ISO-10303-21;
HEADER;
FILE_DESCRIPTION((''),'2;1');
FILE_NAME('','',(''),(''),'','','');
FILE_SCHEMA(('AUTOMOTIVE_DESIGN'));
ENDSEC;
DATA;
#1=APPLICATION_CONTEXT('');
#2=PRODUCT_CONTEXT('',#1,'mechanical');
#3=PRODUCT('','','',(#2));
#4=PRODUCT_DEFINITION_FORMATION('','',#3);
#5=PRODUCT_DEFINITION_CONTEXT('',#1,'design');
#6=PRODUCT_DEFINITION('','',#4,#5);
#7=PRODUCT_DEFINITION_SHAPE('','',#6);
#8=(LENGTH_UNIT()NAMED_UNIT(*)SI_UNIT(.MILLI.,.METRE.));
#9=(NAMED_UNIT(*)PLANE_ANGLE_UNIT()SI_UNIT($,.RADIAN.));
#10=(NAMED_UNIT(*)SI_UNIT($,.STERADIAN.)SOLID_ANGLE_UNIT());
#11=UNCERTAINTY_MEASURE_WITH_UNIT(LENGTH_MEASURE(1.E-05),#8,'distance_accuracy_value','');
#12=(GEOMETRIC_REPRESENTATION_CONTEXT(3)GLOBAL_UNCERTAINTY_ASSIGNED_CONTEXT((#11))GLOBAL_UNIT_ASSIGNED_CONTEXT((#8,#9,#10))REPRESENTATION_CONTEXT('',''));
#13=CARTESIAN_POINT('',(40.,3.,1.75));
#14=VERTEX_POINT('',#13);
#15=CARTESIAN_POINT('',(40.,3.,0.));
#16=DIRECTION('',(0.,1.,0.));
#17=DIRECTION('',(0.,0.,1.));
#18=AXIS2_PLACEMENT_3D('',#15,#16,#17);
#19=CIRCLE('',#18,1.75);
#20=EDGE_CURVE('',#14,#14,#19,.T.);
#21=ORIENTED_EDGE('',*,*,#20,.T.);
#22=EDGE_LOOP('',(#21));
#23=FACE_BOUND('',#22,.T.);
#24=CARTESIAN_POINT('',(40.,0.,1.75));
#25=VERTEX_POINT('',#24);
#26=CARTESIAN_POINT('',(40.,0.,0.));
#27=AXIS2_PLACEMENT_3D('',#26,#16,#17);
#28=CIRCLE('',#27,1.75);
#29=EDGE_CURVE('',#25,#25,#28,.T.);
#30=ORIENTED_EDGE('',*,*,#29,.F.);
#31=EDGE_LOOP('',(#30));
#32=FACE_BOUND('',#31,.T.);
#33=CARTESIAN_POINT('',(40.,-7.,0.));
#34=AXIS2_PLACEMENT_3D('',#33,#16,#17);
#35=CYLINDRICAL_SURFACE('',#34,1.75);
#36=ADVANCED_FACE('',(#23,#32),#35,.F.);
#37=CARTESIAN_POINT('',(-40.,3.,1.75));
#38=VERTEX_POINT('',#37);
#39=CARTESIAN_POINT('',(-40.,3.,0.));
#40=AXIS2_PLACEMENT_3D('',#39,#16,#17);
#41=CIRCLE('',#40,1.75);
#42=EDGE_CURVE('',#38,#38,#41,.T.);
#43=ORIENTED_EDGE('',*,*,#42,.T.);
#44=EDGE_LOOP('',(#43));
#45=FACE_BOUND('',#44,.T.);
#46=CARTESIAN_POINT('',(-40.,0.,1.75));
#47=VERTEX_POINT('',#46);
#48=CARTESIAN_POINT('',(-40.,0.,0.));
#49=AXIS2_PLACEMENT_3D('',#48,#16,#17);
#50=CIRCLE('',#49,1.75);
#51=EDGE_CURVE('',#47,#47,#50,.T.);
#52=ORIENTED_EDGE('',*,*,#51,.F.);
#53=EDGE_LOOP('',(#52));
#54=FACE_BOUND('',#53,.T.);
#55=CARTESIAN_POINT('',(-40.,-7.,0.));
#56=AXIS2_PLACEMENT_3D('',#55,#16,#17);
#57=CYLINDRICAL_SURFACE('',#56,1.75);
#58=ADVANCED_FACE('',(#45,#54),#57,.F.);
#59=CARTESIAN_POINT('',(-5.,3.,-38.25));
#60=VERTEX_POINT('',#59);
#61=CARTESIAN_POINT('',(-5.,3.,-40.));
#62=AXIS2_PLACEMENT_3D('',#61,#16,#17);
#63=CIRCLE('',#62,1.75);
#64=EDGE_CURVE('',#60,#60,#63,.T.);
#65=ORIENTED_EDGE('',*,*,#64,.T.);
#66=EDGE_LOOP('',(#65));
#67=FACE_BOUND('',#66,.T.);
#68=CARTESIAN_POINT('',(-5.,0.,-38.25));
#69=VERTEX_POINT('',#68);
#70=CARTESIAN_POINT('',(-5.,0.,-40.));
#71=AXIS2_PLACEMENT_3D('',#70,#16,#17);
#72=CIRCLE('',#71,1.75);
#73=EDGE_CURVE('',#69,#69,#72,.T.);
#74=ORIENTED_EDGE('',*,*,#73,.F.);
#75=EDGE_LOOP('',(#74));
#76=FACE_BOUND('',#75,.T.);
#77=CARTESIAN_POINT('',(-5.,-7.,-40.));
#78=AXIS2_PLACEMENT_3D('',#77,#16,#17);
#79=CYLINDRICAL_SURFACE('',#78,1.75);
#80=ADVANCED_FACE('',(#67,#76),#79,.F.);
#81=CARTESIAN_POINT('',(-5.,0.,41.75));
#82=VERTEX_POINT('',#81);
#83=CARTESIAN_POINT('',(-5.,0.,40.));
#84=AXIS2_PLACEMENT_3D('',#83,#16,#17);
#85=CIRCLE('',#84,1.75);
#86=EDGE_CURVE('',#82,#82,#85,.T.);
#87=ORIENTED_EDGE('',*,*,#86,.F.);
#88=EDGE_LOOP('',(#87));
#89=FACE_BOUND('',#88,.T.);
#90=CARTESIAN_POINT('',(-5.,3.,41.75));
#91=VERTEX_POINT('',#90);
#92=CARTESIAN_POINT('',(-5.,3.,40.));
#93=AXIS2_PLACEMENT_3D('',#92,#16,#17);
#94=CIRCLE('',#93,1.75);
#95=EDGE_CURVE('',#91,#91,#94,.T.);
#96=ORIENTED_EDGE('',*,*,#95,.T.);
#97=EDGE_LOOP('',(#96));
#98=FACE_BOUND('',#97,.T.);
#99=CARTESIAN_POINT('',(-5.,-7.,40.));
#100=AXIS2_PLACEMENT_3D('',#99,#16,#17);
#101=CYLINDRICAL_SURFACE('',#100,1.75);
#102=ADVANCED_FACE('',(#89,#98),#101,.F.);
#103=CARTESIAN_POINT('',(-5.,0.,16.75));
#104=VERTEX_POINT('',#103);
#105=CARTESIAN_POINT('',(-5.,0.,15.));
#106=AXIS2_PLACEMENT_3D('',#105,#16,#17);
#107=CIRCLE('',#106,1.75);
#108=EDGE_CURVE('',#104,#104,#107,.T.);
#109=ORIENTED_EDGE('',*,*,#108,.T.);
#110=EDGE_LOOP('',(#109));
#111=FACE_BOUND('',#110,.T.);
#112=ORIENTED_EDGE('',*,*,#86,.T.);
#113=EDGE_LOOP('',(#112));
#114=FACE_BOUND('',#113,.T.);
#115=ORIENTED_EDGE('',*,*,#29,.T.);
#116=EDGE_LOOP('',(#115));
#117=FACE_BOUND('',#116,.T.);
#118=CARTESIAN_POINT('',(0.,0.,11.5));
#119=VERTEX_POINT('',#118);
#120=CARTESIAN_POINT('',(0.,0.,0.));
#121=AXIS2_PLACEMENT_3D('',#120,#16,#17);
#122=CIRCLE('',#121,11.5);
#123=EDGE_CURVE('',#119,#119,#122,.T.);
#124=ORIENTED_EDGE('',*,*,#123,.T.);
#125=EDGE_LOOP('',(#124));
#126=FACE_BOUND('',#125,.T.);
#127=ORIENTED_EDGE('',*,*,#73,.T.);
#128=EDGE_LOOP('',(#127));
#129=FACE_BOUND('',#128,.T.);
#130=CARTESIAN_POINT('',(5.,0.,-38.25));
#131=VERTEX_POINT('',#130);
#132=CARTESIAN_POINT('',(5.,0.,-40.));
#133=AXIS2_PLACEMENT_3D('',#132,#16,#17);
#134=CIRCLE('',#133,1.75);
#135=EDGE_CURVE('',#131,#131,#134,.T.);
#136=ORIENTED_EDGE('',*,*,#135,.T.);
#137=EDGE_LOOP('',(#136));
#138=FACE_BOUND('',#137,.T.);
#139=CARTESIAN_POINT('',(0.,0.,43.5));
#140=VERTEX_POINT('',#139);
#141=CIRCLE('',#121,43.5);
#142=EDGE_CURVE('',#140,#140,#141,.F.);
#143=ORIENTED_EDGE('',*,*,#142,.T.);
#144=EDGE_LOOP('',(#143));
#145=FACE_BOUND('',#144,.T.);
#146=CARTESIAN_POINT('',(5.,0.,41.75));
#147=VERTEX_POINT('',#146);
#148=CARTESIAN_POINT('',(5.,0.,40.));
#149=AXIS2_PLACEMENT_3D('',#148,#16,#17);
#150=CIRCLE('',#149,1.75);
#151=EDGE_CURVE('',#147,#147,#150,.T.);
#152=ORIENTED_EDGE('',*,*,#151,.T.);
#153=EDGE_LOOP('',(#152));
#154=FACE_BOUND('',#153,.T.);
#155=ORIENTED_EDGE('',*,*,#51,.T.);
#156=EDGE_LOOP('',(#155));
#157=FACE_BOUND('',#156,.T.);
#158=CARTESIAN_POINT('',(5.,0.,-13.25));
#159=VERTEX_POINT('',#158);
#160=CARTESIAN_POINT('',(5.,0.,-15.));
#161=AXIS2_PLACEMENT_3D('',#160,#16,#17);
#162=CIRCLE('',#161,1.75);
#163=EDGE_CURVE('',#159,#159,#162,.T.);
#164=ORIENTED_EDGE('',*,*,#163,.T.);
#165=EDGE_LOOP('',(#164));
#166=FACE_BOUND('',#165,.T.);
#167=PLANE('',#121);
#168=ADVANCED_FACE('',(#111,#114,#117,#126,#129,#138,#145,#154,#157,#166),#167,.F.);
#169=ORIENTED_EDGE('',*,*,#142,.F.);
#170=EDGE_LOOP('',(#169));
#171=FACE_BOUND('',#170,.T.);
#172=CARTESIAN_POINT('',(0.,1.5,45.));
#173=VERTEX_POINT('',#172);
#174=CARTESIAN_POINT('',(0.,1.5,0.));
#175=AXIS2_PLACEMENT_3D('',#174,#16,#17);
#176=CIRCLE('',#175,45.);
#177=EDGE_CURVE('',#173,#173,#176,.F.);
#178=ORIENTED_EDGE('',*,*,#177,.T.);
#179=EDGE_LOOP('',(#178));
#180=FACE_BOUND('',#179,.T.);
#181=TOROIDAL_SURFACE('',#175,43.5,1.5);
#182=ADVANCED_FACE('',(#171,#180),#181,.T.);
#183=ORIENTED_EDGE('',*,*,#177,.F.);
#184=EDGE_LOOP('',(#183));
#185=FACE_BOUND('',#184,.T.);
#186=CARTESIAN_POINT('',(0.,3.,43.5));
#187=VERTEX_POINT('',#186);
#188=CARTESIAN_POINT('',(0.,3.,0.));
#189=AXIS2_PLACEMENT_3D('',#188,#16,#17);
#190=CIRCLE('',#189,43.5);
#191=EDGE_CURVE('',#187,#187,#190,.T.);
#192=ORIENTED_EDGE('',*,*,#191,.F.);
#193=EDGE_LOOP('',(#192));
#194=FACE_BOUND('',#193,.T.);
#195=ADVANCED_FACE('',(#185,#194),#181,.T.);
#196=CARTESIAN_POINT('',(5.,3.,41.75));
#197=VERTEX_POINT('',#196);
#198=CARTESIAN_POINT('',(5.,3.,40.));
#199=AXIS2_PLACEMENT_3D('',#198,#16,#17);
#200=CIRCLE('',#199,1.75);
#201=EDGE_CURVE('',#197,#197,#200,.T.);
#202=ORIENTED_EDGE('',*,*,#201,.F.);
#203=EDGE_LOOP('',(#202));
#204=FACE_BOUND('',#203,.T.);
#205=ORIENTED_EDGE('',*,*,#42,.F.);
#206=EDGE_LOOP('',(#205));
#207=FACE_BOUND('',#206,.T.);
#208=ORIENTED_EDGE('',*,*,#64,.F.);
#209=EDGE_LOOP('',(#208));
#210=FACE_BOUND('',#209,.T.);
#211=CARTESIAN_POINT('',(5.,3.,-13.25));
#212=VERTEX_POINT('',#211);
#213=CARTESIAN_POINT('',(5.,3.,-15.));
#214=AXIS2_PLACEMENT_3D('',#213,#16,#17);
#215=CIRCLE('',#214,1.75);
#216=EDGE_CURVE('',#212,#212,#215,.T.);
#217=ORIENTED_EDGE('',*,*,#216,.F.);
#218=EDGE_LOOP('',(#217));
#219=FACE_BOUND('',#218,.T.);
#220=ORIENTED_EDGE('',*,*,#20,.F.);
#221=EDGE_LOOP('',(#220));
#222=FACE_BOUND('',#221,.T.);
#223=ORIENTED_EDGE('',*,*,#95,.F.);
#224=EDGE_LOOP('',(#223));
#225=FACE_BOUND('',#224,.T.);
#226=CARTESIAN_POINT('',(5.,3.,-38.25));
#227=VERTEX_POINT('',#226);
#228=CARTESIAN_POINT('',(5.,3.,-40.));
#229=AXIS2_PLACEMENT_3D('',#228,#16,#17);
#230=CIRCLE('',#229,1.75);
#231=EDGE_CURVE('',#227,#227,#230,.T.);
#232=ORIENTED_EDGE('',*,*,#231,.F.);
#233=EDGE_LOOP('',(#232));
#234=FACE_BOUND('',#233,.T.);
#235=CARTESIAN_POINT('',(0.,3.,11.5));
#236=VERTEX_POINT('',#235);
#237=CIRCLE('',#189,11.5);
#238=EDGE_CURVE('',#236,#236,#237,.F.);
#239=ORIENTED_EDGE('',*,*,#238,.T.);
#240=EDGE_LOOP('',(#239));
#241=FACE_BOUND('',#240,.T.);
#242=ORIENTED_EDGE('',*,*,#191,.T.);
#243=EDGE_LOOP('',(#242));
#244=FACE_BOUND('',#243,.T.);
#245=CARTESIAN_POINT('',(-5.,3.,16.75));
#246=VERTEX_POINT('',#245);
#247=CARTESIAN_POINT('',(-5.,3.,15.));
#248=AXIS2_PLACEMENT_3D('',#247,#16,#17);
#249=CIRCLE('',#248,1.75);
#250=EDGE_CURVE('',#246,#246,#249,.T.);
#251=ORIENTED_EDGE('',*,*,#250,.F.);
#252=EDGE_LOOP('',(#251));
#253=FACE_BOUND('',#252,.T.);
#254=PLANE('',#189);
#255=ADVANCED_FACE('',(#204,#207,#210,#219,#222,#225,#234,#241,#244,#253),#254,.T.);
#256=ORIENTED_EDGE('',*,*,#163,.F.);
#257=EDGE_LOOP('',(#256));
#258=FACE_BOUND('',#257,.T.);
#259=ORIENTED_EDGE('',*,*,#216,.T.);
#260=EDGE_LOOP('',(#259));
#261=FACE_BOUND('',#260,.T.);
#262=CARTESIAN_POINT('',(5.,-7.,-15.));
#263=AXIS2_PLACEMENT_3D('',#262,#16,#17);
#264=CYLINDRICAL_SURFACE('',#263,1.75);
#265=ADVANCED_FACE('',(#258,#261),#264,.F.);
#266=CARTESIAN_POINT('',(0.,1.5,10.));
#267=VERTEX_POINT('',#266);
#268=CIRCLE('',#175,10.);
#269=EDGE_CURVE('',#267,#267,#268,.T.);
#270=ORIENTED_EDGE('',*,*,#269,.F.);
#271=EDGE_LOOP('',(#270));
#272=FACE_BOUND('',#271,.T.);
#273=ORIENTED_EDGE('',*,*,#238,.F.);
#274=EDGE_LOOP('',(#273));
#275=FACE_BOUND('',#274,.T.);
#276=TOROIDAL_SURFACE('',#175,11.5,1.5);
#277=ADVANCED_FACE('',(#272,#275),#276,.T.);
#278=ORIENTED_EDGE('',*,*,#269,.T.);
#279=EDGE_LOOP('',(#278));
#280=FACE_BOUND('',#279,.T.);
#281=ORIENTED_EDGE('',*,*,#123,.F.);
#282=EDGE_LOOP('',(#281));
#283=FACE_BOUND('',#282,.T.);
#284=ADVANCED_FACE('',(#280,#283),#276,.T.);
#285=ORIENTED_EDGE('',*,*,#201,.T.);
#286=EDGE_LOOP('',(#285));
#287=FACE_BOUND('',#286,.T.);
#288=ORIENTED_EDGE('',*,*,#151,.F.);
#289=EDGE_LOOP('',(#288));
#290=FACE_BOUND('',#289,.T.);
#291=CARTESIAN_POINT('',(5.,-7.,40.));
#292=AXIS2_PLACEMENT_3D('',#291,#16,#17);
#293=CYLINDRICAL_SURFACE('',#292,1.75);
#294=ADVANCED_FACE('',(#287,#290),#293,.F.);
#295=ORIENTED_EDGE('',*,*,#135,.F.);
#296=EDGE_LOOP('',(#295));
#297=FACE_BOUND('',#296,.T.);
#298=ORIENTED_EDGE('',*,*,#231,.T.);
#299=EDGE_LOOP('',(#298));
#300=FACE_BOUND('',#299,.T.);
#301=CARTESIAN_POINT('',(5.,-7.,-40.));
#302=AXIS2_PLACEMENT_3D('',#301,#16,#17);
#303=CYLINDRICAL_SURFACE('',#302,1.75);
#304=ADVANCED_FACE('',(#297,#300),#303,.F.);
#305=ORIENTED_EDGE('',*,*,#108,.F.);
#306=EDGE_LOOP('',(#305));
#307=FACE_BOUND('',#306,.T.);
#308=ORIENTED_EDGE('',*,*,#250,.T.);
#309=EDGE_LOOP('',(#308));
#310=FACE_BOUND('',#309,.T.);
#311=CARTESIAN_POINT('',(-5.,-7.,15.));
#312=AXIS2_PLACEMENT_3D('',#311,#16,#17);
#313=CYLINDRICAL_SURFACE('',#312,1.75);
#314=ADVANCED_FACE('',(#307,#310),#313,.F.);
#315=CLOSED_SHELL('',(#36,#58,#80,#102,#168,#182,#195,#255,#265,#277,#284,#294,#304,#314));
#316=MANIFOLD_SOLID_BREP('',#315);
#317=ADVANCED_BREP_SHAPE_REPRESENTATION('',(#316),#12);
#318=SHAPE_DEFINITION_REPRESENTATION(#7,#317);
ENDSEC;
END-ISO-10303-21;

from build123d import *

# Parameters (mm, degrees)
SKETCH1_R           = 45
BOSS_EXTRUDE1_DEPTH = 3
SKETCH2_R           = 1.75
CUT_EXTRUDE1_DEPTH  = 10
SKETCH3_R           = 10
CUT_EXTRUDE2_DEPTH  = 5
FILLET1_R           = 1.5
FILLET2_R           = 1.5


with BuildPart() as part:
    # Sketch1 → Boss-Extrude1 (new body)
    with BuildSketch(Plane(origin=(0, 0, 0), x_dir=(1, 0, 0), z_dir=(0, 1, 0))):
        with Locations(Location((0, 0, 0), (0, 0, 270))):
            Circle(SKETCH1_R)
    extrude(amount=BOSS_EXTRUDE1_DEPTH)

    # Sketch2 → Cut-Extrude1 (cut)
    with BuildSketch(Plane(origin=(0, 3, 0), x_dir=(1, 0, 0), z_dir=(0, 1, 0))):
        with Locations(Location((-5, -40, 0), (0, 0, 270))):
            Circle(SKETCH2_R)
        with Locations(Location((5, -40, 0), (0, 0, 270))):
            Circle(SKETCH2_R)
        with Locations(Location((-5, 40, 0), (0, 0, 270))):
            Circle(SKETCH2_R)
        with Locations(Location((5, 40, 0), (0, 0, 270))):
            Circle(SKETCH2_R)
        with Locations(Location((-40, 0, 0), (0, 0, 270))):
            Circle(SKETCH2_R)
        with Locations(Location((40, 0, 0), (0, 0, 270))):
            Circle(SKETCH2_R)
        with Locations(Location((-5, -15, 0), (0, 0, 270))):
            Circle(SKETCH2_R)
        with Locations(Location((5, 15, 0), (0, 0, 270))):
            Circle(SKETCH2_R)
    extrude(amount=-CUT_EXTRUDE1_DEPTH, mode=Mode.SUBTRACT)

    # Sketch3 → Cut-Extrude2 (cut)
    with BuildSketch(Plane(origin=(0, 3, 0), x_dir=(1, 0, 0), z_dir=(0, 1, 0))):
        with Locations(Location((0, 0, 0), (0, 0, 270))):
            Circle(SKETCH3_R)
    extrude(amount=-CUT_EXTRUDE2_DEPTH, mode=Mode.SUBTRACT)

    # Fillet1
    fillet1_edges = [part.edges().sort_by_distance(p)[0] for p in [
        (0, 0, -45),
        (0, 3, -45),
    ]]
    fillet(fillet1_edges, radius=FILLET1_R - 0.0001)  # a hair under: the kernel refuses the full size

    # Fillet2
    fillet2_edges = [part.edges().sort_by_distance(p)[0] for p in [
        (0, 0, -10),
        (0, 3, -10),
    ]]
    fillet(fillet2_edges, radius=FILLET2_R - 0.0001)  # a hair under: the kernel refuses the full size


solid = part.part
